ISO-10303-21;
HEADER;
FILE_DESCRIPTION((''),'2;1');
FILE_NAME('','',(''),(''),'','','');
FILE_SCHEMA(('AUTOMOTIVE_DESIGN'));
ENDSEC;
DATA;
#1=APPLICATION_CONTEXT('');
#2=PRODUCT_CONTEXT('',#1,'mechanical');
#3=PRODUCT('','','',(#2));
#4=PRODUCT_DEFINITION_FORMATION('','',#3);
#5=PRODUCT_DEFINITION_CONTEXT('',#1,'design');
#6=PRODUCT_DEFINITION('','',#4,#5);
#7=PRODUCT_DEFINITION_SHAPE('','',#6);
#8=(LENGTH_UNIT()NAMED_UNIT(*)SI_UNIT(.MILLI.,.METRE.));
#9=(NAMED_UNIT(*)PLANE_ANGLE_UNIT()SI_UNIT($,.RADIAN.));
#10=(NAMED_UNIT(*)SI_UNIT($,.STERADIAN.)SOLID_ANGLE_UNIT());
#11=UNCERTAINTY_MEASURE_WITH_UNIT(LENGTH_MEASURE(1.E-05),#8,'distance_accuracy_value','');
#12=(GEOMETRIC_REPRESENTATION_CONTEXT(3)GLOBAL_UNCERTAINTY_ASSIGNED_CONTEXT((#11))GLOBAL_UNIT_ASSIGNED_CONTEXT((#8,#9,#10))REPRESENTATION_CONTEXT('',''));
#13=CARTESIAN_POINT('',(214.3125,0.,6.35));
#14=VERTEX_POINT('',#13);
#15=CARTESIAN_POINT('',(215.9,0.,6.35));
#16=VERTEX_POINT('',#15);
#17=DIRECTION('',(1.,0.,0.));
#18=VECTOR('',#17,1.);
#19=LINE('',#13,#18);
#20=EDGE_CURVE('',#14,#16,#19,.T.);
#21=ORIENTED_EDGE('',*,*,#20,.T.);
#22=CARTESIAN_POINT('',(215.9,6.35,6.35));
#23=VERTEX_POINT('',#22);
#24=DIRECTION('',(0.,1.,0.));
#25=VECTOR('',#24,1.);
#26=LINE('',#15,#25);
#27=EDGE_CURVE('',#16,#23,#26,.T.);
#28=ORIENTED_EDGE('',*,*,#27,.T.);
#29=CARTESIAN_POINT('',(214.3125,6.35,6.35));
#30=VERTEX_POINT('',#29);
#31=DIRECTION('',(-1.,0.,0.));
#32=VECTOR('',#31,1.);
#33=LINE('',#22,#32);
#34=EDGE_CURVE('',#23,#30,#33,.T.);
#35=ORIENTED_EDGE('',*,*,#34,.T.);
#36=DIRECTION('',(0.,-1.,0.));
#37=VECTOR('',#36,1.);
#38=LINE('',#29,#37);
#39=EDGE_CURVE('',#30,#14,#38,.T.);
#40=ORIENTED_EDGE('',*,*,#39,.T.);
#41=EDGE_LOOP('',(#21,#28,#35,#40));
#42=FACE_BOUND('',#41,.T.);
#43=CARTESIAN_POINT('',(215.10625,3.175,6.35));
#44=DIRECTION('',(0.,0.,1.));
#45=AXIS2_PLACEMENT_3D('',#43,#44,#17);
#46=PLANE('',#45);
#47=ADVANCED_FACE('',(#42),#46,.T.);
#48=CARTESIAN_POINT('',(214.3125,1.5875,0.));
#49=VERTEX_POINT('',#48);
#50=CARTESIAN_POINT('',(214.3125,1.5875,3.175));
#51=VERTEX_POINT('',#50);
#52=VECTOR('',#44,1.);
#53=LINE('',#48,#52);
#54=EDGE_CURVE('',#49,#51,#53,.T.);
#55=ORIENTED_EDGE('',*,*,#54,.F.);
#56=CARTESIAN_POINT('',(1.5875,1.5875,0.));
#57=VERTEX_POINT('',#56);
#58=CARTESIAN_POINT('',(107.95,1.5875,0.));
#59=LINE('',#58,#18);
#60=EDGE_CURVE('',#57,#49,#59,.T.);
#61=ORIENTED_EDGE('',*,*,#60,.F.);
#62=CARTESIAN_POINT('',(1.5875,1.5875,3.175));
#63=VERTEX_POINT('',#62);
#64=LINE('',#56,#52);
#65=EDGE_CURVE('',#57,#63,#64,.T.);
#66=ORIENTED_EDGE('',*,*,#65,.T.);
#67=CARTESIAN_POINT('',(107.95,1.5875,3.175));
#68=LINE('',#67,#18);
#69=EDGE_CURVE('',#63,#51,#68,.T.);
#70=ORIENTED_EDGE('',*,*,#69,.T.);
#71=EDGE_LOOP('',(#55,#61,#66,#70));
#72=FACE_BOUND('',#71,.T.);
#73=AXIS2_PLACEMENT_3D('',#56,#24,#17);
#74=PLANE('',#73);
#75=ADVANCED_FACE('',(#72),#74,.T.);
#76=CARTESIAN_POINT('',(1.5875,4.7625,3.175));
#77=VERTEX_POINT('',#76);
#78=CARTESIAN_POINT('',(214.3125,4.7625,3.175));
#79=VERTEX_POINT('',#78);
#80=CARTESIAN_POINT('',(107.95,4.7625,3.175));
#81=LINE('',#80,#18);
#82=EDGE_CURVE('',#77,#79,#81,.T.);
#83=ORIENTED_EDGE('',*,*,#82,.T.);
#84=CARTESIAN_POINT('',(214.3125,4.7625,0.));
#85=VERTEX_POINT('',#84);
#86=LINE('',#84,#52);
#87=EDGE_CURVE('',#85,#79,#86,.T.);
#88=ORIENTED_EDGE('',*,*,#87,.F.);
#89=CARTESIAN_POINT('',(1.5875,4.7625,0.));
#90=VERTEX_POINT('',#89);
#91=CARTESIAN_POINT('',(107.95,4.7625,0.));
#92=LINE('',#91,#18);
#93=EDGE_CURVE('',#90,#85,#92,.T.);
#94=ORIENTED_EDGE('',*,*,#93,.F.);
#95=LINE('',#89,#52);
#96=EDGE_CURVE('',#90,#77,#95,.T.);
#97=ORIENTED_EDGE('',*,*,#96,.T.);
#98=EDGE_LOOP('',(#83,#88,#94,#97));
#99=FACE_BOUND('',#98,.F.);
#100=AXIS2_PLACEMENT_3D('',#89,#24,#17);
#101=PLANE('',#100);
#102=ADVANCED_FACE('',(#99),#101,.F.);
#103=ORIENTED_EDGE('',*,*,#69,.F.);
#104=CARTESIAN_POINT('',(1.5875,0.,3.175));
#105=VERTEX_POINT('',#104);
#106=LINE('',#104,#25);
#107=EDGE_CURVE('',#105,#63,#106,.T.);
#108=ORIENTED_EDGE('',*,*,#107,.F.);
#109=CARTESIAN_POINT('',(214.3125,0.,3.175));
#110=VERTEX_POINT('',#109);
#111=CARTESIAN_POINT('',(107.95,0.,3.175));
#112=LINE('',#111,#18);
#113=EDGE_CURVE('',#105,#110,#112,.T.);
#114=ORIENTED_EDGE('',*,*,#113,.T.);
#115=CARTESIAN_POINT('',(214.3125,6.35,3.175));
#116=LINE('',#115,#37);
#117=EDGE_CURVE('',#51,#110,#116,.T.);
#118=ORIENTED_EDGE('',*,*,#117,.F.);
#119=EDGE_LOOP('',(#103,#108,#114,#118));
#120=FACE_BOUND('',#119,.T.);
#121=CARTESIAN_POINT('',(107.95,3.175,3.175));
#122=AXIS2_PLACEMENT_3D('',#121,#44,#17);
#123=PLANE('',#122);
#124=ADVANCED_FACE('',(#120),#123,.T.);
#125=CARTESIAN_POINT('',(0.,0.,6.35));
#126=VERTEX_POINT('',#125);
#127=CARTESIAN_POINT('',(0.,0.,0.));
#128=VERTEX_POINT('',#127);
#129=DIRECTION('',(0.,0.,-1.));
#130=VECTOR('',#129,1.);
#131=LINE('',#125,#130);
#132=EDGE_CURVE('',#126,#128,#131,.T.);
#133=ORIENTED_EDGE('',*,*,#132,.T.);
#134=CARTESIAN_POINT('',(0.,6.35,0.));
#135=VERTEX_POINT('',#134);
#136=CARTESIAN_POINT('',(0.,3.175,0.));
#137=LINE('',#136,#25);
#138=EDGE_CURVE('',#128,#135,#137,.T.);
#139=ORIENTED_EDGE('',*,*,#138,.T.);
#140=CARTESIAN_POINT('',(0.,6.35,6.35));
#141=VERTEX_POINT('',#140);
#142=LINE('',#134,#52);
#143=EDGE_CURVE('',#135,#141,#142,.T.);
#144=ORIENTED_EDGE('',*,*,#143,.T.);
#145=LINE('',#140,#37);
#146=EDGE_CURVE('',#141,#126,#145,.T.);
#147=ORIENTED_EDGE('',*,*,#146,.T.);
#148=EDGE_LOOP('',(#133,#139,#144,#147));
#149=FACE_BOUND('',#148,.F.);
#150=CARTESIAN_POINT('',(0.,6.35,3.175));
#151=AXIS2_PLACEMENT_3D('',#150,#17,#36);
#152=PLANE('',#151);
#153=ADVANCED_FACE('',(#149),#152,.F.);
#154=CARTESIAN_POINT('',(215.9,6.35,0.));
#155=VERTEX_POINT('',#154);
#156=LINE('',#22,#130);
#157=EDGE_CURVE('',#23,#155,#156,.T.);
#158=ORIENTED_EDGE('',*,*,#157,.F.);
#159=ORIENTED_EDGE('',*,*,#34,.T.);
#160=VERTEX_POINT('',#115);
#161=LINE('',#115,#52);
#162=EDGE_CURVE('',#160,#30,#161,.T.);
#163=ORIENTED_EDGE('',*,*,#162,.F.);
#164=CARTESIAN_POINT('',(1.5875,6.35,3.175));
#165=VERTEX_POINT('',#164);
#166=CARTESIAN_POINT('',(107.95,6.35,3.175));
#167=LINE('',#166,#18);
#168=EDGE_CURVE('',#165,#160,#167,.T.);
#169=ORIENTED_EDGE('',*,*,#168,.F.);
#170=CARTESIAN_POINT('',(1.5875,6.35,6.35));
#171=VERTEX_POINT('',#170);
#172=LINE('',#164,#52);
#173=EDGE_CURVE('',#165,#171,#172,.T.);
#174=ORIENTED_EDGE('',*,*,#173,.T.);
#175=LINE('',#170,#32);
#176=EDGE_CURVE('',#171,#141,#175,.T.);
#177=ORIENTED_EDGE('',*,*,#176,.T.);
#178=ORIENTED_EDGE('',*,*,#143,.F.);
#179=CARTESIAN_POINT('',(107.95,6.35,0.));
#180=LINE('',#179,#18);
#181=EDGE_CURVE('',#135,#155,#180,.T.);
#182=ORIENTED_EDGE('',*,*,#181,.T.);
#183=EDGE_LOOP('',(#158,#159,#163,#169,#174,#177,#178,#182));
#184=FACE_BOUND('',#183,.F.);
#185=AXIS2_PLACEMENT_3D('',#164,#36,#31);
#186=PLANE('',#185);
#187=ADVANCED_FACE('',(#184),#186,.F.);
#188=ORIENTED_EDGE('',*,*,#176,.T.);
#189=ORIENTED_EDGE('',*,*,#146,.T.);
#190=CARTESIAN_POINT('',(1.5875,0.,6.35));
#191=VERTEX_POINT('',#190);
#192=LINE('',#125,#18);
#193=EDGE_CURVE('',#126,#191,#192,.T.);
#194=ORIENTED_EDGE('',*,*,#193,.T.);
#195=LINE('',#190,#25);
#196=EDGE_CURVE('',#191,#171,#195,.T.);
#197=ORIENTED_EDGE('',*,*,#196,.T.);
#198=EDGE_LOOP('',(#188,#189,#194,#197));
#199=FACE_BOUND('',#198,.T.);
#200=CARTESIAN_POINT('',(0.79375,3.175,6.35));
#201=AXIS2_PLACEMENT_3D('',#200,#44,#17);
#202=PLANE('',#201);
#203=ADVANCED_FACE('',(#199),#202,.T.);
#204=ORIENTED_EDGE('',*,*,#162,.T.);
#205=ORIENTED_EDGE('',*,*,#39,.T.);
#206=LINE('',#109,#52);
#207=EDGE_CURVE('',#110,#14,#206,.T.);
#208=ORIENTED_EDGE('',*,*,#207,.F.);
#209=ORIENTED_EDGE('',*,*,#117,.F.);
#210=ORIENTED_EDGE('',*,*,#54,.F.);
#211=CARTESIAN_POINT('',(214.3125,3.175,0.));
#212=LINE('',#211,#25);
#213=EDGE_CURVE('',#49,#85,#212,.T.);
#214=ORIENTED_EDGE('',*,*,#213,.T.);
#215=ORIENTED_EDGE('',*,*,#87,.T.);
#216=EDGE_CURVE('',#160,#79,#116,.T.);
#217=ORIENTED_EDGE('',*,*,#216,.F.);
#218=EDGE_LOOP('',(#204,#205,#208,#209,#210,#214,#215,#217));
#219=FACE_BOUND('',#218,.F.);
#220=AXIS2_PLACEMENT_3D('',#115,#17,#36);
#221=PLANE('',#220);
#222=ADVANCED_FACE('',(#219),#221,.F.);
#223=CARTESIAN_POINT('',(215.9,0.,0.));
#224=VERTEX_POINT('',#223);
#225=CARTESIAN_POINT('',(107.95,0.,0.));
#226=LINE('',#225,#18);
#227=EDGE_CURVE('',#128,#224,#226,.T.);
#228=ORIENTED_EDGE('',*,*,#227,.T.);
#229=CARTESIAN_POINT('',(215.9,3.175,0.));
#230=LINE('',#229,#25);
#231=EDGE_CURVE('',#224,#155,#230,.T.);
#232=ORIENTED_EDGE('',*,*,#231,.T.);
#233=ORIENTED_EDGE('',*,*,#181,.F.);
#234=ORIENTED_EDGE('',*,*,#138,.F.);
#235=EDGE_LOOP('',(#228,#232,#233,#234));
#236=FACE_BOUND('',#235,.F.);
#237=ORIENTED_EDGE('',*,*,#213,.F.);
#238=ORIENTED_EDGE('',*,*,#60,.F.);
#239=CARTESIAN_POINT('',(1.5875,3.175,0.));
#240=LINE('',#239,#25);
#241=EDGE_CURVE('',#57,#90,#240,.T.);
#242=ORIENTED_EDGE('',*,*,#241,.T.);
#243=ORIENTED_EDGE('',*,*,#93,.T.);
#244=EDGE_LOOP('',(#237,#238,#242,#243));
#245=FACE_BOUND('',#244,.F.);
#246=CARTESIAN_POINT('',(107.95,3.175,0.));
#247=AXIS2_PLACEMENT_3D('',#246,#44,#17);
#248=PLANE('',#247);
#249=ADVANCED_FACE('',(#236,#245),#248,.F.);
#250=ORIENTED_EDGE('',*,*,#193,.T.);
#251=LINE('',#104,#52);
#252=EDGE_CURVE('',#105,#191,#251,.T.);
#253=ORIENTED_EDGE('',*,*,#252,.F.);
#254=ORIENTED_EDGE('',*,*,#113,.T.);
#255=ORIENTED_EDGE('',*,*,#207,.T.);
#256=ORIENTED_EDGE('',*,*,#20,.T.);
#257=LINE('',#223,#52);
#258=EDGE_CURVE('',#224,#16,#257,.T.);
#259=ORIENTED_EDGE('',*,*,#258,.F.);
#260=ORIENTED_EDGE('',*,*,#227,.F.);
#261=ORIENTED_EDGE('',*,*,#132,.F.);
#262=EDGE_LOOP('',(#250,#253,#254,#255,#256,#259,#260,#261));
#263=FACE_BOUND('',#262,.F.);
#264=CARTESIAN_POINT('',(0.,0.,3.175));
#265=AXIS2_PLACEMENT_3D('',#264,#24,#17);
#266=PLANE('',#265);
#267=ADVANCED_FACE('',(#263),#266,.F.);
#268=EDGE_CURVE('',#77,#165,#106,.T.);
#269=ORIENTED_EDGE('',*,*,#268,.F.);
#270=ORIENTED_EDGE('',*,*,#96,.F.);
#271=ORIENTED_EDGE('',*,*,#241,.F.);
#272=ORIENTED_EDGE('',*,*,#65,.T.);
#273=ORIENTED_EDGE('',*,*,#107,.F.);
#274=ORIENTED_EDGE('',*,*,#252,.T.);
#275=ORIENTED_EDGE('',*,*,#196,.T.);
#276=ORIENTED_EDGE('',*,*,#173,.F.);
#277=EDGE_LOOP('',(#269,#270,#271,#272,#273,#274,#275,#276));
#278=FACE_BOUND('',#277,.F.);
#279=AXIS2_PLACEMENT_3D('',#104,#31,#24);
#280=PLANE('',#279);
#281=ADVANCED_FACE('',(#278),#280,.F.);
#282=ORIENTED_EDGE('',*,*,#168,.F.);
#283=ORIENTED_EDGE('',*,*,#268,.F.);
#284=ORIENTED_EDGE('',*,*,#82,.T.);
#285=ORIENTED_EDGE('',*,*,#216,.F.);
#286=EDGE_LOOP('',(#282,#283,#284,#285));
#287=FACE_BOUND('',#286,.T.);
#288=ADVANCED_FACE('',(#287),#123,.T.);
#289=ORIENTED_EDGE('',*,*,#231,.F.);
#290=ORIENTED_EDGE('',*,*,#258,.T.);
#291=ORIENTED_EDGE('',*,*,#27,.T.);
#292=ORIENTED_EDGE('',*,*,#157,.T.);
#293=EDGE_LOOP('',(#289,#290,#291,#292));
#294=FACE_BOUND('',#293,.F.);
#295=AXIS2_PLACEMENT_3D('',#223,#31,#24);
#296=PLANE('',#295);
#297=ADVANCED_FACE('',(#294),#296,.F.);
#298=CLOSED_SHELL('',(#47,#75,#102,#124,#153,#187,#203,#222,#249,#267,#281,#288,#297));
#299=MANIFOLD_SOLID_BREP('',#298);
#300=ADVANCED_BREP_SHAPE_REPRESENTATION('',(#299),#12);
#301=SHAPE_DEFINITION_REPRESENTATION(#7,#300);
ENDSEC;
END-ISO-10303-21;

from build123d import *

# Parameters (mm, degrees)
F0_W     = 215.9
F0_H     = 6.35
F0_W_2   = 212.725
F0_H_2   = 3.175
F1_DEPTH = 3.175
F3_DEPTH = 3.175


# Not quite as in the source:
# - a length typed as a fraction of an inch, garbled in the dataset ("3 / 203.2 mm" for 3/8 in), is restored


with BuildPart() as f1:
    # F0 (on Top) → F1 (new body)
    with BuildSketch(Plane.XY):
        with Locations((107.95, 3.175)):
            Rectangle(F0_W, F0_H)
        with Locations((107.95, 3.175)):
            Rectangle(F0_W_2, F0_H_2, mode=Mode.SUBTRACT)
    extrude(amount=F1_DEPTH)

    # F2 (on face) → F3 (join)
    with BuildSketch(Plane.XY.offset(3.175)):
        Polygon((1.5875, 0), (1.5875, 1.5875), (1.5875, 4.7625), (1.5875, 6.35), (0, 6.35), (0, 0), align=None)
        Polygon((214.3125, 4.7625), (214.3125, 1.5875), (214.3125, 0), (215.9, 0), (215.9, 6.35), (214.3125, 6.35), align=None)
    extrude(amount=F3_DEPTH)


solid = f1.part
